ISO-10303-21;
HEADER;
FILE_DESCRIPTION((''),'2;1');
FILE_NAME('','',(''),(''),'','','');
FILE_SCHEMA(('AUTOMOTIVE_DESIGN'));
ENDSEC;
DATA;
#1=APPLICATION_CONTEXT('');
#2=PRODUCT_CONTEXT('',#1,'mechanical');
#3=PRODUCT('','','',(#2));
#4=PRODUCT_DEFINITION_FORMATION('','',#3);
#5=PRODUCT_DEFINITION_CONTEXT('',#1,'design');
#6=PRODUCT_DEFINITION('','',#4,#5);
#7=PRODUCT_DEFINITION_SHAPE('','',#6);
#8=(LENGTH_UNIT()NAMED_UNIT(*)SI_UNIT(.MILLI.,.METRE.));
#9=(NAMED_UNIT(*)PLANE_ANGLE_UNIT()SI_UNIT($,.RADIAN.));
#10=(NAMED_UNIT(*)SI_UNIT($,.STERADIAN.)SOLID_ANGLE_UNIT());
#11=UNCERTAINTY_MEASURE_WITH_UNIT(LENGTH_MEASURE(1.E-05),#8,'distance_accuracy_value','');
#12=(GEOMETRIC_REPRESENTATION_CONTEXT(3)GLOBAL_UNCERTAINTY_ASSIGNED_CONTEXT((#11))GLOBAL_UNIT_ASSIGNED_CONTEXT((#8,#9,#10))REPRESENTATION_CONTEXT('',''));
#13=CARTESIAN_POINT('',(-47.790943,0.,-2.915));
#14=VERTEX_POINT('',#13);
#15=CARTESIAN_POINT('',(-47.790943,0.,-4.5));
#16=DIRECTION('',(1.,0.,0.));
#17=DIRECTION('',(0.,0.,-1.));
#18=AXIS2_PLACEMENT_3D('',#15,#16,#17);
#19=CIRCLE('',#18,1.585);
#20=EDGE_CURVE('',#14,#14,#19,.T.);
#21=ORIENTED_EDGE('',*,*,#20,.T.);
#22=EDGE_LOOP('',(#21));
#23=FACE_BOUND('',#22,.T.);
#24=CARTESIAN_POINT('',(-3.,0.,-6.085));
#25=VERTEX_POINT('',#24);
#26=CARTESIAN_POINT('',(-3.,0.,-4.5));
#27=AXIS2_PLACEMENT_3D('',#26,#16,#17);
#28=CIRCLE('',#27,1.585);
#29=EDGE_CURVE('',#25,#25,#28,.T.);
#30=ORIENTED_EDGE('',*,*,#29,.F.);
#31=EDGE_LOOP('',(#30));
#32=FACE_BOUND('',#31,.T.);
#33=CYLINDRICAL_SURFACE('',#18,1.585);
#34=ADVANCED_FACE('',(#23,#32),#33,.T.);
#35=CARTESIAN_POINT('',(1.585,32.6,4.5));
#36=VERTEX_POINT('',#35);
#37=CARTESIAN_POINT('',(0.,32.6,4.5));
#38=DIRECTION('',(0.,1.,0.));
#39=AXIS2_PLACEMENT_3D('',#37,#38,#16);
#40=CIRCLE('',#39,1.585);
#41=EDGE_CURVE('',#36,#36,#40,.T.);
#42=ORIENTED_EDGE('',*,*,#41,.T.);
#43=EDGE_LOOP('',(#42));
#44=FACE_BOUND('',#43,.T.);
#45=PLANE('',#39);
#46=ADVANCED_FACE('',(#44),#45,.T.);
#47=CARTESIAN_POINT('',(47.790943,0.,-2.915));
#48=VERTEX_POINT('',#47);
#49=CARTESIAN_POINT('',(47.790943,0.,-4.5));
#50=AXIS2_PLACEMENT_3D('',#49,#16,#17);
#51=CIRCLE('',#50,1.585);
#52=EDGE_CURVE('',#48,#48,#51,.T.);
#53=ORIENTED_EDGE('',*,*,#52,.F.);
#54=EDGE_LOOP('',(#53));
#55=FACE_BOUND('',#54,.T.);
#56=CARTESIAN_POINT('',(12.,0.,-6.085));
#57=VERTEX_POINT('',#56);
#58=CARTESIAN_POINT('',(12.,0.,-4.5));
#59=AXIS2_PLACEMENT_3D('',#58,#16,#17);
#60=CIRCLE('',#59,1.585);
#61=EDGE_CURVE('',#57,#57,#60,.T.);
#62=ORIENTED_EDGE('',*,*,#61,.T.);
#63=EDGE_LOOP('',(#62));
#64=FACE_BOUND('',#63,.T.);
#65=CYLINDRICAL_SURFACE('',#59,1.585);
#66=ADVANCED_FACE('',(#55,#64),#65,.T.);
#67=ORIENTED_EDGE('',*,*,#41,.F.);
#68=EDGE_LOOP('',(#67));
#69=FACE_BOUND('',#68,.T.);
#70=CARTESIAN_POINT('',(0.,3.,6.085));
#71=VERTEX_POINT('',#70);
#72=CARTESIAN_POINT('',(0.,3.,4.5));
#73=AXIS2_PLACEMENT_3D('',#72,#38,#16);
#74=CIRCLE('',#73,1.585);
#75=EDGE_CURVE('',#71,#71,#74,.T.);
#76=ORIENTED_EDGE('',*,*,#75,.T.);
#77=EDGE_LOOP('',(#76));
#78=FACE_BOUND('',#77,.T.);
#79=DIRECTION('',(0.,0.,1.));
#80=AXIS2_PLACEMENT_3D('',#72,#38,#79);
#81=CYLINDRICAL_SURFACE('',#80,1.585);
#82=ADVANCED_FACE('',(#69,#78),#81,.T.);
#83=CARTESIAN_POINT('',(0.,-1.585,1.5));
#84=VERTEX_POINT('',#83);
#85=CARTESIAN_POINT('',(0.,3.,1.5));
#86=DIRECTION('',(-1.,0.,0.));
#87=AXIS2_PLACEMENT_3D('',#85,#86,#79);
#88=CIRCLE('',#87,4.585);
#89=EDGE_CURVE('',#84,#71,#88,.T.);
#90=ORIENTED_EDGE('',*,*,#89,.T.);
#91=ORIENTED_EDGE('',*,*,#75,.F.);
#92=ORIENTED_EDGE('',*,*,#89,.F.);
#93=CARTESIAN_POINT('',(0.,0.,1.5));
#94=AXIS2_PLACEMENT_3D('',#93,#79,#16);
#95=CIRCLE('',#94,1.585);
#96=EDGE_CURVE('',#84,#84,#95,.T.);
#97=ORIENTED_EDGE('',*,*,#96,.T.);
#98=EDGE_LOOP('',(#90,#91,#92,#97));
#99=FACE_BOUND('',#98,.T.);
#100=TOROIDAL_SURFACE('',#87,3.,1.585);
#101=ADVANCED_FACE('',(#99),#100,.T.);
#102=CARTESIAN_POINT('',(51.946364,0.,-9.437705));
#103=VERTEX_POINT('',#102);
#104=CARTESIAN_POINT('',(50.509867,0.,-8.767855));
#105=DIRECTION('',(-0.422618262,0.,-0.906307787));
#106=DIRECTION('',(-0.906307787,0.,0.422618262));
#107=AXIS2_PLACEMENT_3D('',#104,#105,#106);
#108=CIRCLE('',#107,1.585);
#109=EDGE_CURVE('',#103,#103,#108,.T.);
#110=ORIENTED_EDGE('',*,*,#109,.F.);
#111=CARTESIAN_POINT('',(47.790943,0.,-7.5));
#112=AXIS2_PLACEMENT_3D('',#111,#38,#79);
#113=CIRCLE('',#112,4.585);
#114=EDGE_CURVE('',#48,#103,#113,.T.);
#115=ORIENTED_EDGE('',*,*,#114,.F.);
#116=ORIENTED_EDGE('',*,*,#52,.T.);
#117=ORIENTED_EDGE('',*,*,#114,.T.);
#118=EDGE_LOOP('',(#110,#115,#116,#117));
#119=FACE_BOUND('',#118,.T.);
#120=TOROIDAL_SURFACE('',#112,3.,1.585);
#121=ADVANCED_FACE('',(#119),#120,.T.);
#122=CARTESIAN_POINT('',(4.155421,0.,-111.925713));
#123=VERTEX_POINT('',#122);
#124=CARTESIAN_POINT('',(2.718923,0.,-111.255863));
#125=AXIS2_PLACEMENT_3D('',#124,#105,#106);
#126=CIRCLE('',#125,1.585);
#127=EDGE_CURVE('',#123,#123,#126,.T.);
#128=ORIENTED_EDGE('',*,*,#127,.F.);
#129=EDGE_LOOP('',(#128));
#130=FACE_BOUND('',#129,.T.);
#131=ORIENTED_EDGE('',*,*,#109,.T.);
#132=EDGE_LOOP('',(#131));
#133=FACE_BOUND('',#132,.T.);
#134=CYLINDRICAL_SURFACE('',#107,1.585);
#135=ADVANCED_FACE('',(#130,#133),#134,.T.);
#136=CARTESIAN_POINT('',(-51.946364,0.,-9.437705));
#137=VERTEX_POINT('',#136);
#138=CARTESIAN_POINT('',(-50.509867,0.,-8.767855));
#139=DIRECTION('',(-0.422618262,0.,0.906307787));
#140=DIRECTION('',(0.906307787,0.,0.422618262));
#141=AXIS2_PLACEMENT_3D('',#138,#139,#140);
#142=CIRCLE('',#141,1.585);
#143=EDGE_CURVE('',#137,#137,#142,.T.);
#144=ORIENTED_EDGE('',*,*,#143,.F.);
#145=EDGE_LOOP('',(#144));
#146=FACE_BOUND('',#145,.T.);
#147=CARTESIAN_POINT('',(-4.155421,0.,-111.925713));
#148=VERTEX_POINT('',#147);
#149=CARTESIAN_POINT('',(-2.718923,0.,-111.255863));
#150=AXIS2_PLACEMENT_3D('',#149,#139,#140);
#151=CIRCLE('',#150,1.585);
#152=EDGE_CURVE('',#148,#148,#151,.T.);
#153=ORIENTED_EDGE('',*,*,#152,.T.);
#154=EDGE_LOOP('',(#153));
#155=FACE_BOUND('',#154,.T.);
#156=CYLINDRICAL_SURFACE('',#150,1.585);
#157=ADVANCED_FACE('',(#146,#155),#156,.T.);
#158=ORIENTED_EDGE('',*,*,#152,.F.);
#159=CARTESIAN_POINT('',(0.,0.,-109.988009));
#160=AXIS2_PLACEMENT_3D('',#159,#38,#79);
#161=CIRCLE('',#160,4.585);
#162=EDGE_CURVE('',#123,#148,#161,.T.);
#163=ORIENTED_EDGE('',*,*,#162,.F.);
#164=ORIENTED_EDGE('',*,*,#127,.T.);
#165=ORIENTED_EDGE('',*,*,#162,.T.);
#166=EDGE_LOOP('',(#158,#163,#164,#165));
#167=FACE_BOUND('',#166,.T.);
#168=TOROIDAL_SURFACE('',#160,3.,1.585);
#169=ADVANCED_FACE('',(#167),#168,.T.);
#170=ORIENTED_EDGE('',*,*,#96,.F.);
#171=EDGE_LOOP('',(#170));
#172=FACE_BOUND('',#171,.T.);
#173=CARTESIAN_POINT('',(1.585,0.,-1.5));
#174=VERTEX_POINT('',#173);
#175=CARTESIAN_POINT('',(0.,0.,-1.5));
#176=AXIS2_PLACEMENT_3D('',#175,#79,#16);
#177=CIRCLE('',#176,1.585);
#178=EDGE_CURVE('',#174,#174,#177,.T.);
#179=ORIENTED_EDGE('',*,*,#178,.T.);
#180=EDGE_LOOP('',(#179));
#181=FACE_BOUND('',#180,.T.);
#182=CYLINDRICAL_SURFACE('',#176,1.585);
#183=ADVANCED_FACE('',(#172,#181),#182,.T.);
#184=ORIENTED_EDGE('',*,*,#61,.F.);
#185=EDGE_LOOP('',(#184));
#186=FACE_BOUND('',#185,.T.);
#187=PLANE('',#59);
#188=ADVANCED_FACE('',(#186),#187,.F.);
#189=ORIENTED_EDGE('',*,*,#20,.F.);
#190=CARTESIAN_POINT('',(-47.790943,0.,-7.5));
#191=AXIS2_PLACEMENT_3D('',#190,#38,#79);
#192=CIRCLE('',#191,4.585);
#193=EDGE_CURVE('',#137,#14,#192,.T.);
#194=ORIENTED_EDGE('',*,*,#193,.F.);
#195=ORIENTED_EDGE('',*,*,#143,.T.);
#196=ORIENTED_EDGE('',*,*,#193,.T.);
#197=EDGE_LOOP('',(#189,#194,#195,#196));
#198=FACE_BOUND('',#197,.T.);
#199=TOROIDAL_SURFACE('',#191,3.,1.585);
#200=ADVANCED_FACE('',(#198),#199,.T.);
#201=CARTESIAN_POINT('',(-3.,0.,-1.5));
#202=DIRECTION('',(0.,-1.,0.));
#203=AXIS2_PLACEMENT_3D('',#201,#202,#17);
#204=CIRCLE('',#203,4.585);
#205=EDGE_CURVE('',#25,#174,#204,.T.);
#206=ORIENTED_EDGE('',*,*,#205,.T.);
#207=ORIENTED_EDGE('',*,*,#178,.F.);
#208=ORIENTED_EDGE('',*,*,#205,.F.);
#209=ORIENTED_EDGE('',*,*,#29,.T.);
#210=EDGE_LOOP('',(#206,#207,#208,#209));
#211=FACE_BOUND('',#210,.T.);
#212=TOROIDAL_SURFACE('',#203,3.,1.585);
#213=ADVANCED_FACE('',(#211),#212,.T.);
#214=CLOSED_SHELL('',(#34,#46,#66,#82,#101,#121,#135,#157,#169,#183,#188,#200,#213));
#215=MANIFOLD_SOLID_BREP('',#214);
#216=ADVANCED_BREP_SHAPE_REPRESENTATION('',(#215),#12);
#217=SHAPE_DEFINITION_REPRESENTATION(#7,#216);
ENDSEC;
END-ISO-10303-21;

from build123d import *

# Parameters (mm, degrees)
ESBO_O7_R              = 1.585
VARREDURA4_OUTLINE_R   = 1.585
VARREDURA4_ANGLE       = 90
VARREDURA4_START       = -1.5000001
VARREDURA4_2_OUTLINE_R = 1.585
VARREDURA4_2_DEPTH     = 3.0000002
VARREDURA4_START_2     = 2.9999999
VARREDURA4_3_OUTLINE_R = 1.585
VARREDURA4_3_DEPTH     = 29.6000001


with BuildPart() as part:
    # Varredura3: sweep along a path in Esboço1
    with BuildLine(Plane(origin=(0, 0, 0), x_dir=(1, 0, 0), z_dir=(0, 1, 0))) as varredura3_path:
        Line((0, 0), (0, 1.5))
        ThreePointArc((0, 1.5), (-0.878679656, 3.621320344), (-3, 4.5))
        Line((-3, 4.5), (-47.790943269, 4.5))
        ThreePointArc((-47.790943269, 4.5), (-50.321117606, 5.888101175), (-50.50986663, 8.767854785))
        Line((-50.50986663, 8.767854785), (-2.718923361, 111.255863363))
        ThreePointArc((-2.718923361, 111.255863363), (0, 112.988008577), (2.718923361, 111.255863363))
        Line((2.718923361, 111.255863363), (50.50986663, 8.767854785))
        ThreePointArc((50.50986663, 8.767854785), (50.321117606, 5.888101175), (47.790943269, 4.5))
        Line((47.790943269, 4.5), (12, 4.5))
    # Esboço7 → Varredura3 (sweep)
    with BuildSketch(Plane.XY):
        Circle(ESBO_O7_R)
    sweep(path=varredura3_path.line)



with BuildPart() as body_2:
    # Varredura4: read off the stored shape, not the designer's step
    # Varredura4 outline → Varredura4 (revolve)
    with BuildSketch(Plane(origin=(0, 3, 1.5), x_dir=(0, 0, 1), z_dir=(0, 1, 0))):
        with Locations((3, 0)):
            Circle(VARREDURA4_OUTLINE_R)
    revolve(axis=Axis((0, 3, 1.5), (1, 0, 0)), revolution_arc=VARREDURA4_ANGLE)


with BuildPart() as part_1:
    add(part.part)

    add(body_2.part)  # Varredura4 2 merges body 2
    # Varredura4 2 outline → Varredura4 2 (add)
    with BuildSketch(Plane.XY.offset(VARREDURA4_START)):
        Circle(VARREDURA4_2_OUTLINE_R)
    extrude(amount=VARREDURA4_2_DEPTH)

    # Varredura4 3 outline → Varredura4 3 (add)
    with BuildSketch(Plane(origin=(0, 0, 0), x_dir=(1, 0, 0), z_dir=(0, 1, 0)).offset(VARREDURA4_START_2)):
        with Locations((0, -4.5)):
            Circle(VARREDURA4_3_OUTLINE_R)
    extrude(amount=VARREDURA4_3_DEPTH)


solid = part_1.part
